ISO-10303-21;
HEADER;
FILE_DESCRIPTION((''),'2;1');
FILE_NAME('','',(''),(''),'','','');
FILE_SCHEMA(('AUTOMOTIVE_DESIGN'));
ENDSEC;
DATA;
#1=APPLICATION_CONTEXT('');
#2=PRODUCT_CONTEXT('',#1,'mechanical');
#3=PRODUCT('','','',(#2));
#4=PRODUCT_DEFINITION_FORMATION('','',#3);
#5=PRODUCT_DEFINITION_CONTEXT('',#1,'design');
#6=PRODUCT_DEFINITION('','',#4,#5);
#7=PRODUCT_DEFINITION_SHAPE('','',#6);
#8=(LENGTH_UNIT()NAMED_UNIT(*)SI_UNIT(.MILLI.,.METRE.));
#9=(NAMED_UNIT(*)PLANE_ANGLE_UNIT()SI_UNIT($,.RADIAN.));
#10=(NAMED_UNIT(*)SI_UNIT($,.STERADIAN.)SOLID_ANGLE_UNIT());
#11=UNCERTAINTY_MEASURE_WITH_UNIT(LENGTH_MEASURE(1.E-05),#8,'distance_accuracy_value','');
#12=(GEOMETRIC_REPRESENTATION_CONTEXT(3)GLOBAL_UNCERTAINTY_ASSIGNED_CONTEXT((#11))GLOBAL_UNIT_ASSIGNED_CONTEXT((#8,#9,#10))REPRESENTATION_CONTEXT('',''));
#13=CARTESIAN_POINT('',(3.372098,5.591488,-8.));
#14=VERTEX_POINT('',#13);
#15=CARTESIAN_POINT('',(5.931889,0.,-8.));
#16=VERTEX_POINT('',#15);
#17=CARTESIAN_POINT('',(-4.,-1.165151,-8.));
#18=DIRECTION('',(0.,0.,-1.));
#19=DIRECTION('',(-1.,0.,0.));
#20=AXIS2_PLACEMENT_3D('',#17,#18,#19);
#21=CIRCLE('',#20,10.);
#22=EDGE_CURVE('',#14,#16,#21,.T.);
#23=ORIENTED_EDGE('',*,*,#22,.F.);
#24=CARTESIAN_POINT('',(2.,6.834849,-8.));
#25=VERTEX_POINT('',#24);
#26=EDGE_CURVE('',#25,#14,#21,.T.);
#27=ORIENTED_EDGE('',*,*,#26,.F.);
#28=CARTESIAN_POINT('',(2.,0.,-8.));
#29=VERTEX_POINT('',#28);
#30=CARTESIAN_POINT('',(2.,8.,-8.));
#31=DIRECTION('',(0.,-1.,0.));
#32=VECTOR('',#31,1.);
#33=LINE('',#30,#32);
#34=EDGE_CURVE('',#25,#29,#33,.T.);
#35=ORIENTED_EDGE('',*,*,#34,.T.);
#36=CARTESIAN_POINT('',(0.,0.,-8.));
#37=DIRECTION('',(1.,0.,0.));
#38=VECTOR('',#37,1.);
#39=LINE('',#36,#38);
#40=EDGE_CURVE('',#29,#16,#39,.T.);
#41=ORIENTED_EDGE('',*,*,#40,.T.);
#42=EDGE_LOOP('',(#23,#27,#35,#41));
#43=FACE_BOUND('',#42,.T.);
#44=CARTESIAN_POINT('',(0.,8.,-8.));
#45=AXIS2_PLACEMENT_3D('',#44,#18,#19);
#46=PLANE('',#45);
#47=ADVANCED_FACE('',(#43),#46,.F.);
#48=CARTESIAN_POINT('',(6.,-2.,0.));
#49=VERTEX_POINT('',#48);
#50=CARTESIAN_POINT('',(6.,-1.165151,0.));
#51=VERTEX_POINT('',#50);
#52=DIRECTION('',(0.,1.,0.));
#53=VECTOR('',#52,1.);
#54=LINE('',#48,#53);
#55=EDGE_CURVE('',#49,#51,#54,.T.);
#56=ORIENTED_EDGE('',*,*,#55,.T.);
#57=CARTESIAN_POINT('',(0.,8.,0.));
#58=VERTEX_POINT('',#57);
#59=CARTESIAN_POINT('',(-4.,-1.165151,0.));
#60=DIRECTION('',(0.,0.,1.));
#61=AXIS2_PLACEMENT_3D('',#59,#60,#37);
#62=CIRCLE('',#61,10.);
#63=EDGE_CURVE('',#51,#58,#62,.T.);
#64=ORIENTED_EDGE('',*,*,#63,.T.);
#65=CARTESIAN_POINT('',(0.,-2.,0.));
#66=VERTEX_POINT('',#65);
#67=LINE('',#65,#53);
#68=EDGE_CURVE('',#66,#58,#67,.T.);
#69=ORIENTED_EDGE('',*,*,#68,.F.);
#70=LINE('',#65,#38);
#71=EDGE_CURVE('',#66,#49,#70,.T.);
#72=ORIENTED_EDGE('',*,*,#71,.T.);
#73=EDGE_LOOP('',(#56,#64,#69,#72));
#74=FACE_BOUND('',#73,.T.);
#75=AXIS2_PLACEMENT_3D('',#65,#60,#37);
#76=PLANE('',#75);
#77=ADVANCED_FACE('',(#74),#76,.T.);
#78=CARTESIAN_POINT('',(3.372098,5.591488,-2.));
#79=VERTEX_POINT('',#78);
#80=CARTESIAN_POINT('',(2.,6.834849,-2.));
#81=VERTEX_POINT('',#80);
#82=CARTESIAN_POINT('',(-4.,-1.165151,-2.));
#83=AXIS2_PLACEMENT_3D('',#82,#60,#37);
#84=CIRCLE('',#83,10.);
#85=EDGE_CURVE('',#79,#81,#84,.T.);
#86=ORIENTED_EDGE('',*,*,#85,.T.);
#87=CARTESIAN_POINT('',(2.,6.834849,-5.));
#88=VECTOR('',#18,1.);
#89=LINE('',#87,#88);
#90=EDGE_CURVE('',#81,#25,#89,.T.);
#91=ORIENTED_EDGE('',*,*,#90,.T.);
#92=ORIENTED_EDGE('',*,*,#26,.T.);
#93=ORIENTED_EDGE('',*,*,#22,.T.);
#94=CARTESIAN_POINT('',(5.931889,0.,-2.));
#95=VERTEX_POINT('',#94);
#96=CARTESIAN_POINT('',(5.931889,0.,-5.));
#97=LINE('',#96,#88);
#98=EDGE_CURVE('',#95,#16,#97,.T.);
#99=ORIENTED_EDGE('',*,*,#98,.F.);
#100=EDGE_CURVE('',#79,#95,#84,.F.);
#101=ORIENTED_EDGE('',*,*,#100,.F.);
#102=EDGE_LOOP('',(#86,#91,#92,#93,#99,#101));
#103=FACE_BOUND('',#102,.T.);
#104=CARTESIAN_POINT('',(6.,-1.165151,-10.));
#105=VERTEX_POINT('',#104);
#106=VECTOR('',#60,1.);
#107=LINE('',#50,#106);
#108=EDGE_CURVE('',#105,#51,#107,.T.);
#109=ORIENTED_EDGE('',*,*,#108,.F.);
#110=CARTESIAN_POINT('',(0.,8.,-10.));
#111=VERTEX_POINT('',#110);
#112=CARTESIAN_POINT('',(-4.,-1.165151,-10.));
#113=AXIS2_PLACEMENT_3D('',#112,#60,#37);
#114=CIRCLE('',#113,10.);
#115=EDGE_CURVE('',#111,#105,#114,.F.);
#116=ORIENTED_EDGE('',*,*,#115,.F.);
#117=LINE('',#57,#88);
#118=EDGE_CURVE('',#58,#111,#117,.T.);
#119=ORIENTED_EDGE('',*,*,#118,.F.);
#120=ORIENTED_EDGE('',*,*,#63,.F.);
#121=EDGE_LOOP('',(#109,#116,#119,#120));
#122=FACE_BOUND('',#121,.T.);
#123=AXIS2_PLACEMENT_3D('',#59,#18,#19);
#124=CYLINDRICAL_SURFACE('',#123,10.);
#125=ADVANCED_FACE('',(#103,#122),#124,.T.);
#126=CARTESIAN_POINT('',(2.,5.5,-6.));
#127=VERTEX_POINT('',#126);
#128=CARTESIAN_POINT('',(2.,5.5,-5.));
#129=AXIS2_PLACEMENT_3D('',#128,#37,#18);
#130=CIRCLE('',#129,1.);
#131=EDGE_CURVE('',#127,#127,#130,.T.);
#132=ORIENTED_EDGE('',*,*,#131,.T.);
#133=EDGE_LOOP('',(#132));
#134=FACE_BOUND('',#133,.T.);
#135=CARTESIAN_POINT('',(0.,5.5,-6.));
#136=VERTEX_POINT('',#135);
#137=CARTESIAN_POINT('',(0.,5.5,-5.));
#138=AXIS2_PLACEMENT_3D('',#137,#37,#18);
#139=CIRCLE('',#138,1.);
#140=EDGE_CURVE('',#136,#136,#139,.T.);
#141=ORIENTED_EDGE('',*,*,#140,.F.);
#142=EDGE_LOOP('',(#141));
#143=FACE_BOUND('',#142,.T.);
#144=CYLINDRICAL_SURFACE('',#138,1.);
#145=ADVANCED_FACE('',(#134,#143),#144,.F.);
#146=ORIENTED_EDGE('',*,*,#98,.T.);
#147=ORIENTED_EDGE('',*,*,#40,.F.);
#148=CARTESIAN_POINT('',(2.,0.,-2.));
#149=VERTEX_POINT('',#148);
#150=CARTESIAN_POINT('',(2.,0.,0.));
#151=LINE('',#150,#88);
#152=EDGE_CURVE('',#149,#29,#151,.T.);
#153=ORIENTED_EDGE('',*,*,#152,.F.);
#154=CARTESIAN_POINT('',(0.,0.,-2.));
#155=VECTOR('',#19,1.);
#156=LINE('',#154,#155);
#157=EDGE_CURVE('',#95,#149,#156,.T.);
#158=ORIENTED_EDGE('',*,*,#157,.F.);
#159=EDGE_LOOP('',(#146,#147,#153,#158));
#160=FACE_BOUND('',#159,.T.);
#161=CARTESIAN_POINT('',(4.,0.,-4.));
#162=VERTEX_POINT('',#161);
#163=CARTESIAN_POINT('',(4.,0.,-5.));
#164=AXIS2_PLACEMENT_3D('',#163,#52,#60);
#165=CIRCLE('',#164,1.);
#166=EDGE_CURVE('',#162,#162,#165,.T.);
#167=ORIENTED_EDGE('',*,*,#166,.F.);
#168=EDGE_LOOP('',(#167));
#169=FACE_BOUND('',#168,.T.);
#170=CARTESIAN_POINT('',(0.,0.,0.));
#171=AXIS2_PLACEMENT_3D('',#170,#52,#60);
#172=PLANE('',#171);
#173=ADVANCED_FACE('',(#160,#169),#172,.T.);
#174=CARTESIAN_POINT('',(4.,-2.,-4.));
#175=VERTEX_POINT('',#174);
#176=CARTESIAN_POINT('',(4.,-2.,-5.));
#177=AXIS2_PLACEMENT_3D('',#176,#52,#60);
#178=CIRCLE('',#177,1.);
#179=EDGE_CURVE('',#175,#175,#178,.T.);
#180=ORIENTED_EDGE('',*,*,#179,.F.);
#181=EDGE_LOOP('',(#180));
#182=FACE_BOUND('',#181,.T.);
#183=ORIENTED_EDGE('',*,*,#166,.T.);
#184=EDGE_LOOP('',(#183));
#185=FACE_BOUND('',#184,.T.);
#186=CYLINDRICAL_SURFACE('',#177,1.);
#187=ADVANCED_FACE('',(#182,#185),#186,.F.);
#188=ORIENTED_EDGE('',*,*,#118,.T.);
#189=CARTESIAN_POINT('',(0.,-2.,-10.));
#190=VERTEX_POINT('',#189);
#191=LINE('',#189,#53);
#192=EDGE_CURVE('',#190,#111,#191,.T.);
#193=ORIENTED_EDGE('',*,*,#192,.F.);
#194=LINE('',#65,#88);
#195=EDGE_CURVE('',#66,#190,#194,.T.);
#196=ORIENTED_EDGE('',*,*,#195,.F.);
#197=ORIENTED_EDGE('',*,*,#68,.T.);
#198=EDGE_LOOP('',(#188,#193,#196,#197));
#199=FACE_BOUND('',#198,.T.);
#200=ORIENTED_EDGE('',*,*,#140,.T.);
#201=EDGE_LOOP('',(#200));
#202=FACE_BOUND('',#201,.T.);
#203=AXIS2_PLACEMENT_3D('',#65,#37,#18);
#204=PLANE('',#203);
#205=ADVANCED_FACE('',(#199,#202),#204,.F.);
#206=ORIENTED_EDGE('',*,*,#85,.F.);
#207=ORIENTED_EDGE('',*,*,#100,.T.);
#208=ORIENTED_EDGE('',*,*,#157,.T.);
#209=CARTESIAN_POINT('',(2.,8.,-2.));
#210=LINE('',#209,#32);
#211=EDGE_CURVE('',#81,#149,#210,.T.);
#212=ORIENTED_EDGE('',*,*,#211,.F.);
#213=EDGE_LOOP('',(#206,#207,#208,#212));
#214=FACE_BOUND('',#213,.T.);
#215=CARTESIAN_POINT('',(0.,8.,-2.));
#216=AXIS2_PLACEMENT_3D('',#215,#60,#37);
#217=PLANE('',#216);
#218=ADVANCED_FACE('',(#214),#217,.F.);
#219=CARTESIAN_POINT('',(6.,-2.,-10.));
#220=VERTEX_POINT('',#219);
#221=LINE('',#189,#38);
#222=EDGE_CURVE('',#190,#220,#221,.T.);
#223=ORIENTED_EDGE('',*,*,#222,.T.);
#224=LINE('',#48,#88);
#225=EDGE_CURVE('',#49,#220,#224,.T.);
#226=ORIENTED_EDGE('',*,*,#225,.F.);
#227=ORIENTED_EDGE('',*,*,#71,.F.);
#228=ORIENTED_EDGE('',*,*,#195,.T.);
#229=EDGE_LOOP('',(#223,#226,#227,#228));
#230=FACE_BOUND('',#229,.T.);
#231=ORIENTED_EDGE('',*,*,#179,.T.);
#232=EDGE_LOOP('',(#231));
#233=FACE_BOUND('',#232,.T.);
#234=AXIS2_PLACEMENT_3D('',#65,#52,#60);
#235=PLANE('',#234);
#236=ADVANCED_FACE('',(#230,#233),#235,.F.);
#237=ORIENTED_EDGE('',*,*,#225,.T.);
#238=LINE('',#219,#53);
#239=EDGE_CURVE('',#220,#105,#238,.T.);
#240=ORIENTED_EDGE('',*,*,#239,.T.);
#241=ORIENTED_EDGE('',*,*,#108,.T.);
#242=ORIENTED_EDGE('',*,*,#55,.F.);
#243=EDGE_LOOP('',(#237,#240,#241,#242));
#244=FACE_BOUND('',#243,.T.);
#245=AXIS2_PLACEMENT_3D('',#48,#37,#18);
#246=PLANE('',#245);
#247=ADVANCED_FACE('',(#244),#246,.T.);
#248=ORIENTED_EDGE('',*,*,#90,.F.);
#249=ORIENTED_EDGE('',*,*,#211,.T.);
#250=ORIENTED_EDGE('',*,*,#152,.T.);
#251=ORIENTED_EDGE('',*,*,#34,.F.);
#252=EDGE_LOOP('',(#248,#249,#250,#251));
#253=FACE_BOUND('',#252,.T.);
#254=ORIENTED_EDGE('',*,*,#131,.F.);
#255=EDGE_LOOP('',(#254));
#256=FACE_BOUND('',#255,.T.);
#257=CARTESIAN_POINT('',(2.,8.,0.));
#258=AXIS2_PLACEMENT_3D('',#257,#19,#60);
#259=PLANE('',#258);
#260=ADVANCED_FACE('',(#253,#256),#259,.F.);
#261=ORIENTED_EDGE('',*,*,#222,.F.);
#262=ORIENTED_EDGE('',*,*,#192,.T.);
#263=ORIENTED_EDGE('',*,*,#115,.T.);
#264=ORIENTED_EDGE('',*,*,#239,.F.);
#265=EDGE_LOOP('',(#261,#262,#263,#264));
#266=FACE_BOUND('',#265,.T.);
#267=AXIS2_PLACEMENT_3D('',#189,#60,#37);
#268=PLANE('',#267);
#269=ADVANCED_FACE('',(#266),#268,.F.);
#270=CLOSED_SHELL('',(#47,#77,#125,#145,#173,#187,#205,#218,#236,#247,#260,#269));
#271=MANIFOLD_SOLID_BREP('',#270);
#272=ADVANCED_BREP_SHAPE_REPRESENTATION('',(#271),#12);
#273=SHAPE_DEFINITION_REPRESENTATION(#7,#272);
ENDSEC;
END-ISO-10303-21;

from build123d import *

# Parameters (mm, degrees)
CROQUIS1_W              = 4
CROQUIS1_H              = 6
CROQUIS1_R              = 1
SALIENTE_EXTRUIR1_DEPTH = 2
SALIENTE_EXTRUIR2_DEPTH = 8
CROQUIS2_R              = 1
CORTAR_EXTRUIR1_DEPTH   = 14.416407865
REDONDEO1_R             = 10


with BuildPart() as part:
    # Croquis1 → Saliente-Extruir1 (new body)
    # profile 1 of 2: a face of its own
    with BuildSketch(Plane(origin=(0, 0, 0), x_dir=(1, 0, 0), z_dir=(0, 1, 0))):
        with Locations((4, 5)):
            Rectangle(CROQUIS1_W, CROQUIS1_H)
        with Locations(Location((4, 5, 0), (0, 0, 270))):
            Circle(CROQUIS1_R, mode=Mode.SUBTRACT)
    # profile 2 of 2: a face of its own
    with BuildSketch(Plane(origin=(0, 0, 0), x_dir=(1, 0, 0), z_dir=(0, 1, 0))):
        Polygon((6, 0), (6, 2), (2, 2), (2, 8), (6, 8), (6, 10), (0, 10), (0, 0), align=None)
    extrude(amount=-SALIENTE_EXTRUIR1_DEPTH)

    # Croquis1<3> → Saliente-Extruir2 (add)
    with BuildSketch(Plane(origin=(0, 0, 0), x_dir=(1, 0, 0), z_dir=(0, 1, 0))):
        Polygon((6, 0), (6, 2), (2, 2), (2, 8), (6, 8), (6, 10), (0, 10), (0, 0), align=None)
    extrude(amount=SALIENTE_EXTRUIR2_DEPTH)

    # Croquis2 → Cortar-Extruir1 (cut, through all)
    with BuildSketch(Plane(origin=(2, 0, 0), x_dir=(0, 0, -1), z_dir=(1, 0, 0))):
        with Locations((5, 5.5)):
            Circle(CROQUIS2_R)
    extrude(amount=-CORTAR_EXTRUIR1_DEPTH, mode=Mode.SUBTRACT)

    # Redondeo1
    # the kernel refuses this fillet: 10 mm, written as the material it takes off along each edge
    with BuildSketch(Plane(origin=(6, 8, 22.912878475), x_dir=(0, -1, 0), z_dir=(0, 0, -1))) as redondeo1_piece_1:
        with BuildLine():
            CenterArc((9.16515139, 10), REDONDEO1_R, 203.578178478, 66.421821522)
            Line((0, 6), (-0.183303028, 5.92))
            ThreePointArc((-0.183303028, 5.92), (-0.2, 3), (-0.2, 0))
            Line((-0.2, 0), (0, -0.2))
            Line((0, -0.2), (9.16515139, -0.2))
            Line((9.16515139, -0.2), (9.16515139, 0))
        make_face()
    extrude(amount=47.82575695, mode=Mode.SUBTRACT)


solid = part.part
